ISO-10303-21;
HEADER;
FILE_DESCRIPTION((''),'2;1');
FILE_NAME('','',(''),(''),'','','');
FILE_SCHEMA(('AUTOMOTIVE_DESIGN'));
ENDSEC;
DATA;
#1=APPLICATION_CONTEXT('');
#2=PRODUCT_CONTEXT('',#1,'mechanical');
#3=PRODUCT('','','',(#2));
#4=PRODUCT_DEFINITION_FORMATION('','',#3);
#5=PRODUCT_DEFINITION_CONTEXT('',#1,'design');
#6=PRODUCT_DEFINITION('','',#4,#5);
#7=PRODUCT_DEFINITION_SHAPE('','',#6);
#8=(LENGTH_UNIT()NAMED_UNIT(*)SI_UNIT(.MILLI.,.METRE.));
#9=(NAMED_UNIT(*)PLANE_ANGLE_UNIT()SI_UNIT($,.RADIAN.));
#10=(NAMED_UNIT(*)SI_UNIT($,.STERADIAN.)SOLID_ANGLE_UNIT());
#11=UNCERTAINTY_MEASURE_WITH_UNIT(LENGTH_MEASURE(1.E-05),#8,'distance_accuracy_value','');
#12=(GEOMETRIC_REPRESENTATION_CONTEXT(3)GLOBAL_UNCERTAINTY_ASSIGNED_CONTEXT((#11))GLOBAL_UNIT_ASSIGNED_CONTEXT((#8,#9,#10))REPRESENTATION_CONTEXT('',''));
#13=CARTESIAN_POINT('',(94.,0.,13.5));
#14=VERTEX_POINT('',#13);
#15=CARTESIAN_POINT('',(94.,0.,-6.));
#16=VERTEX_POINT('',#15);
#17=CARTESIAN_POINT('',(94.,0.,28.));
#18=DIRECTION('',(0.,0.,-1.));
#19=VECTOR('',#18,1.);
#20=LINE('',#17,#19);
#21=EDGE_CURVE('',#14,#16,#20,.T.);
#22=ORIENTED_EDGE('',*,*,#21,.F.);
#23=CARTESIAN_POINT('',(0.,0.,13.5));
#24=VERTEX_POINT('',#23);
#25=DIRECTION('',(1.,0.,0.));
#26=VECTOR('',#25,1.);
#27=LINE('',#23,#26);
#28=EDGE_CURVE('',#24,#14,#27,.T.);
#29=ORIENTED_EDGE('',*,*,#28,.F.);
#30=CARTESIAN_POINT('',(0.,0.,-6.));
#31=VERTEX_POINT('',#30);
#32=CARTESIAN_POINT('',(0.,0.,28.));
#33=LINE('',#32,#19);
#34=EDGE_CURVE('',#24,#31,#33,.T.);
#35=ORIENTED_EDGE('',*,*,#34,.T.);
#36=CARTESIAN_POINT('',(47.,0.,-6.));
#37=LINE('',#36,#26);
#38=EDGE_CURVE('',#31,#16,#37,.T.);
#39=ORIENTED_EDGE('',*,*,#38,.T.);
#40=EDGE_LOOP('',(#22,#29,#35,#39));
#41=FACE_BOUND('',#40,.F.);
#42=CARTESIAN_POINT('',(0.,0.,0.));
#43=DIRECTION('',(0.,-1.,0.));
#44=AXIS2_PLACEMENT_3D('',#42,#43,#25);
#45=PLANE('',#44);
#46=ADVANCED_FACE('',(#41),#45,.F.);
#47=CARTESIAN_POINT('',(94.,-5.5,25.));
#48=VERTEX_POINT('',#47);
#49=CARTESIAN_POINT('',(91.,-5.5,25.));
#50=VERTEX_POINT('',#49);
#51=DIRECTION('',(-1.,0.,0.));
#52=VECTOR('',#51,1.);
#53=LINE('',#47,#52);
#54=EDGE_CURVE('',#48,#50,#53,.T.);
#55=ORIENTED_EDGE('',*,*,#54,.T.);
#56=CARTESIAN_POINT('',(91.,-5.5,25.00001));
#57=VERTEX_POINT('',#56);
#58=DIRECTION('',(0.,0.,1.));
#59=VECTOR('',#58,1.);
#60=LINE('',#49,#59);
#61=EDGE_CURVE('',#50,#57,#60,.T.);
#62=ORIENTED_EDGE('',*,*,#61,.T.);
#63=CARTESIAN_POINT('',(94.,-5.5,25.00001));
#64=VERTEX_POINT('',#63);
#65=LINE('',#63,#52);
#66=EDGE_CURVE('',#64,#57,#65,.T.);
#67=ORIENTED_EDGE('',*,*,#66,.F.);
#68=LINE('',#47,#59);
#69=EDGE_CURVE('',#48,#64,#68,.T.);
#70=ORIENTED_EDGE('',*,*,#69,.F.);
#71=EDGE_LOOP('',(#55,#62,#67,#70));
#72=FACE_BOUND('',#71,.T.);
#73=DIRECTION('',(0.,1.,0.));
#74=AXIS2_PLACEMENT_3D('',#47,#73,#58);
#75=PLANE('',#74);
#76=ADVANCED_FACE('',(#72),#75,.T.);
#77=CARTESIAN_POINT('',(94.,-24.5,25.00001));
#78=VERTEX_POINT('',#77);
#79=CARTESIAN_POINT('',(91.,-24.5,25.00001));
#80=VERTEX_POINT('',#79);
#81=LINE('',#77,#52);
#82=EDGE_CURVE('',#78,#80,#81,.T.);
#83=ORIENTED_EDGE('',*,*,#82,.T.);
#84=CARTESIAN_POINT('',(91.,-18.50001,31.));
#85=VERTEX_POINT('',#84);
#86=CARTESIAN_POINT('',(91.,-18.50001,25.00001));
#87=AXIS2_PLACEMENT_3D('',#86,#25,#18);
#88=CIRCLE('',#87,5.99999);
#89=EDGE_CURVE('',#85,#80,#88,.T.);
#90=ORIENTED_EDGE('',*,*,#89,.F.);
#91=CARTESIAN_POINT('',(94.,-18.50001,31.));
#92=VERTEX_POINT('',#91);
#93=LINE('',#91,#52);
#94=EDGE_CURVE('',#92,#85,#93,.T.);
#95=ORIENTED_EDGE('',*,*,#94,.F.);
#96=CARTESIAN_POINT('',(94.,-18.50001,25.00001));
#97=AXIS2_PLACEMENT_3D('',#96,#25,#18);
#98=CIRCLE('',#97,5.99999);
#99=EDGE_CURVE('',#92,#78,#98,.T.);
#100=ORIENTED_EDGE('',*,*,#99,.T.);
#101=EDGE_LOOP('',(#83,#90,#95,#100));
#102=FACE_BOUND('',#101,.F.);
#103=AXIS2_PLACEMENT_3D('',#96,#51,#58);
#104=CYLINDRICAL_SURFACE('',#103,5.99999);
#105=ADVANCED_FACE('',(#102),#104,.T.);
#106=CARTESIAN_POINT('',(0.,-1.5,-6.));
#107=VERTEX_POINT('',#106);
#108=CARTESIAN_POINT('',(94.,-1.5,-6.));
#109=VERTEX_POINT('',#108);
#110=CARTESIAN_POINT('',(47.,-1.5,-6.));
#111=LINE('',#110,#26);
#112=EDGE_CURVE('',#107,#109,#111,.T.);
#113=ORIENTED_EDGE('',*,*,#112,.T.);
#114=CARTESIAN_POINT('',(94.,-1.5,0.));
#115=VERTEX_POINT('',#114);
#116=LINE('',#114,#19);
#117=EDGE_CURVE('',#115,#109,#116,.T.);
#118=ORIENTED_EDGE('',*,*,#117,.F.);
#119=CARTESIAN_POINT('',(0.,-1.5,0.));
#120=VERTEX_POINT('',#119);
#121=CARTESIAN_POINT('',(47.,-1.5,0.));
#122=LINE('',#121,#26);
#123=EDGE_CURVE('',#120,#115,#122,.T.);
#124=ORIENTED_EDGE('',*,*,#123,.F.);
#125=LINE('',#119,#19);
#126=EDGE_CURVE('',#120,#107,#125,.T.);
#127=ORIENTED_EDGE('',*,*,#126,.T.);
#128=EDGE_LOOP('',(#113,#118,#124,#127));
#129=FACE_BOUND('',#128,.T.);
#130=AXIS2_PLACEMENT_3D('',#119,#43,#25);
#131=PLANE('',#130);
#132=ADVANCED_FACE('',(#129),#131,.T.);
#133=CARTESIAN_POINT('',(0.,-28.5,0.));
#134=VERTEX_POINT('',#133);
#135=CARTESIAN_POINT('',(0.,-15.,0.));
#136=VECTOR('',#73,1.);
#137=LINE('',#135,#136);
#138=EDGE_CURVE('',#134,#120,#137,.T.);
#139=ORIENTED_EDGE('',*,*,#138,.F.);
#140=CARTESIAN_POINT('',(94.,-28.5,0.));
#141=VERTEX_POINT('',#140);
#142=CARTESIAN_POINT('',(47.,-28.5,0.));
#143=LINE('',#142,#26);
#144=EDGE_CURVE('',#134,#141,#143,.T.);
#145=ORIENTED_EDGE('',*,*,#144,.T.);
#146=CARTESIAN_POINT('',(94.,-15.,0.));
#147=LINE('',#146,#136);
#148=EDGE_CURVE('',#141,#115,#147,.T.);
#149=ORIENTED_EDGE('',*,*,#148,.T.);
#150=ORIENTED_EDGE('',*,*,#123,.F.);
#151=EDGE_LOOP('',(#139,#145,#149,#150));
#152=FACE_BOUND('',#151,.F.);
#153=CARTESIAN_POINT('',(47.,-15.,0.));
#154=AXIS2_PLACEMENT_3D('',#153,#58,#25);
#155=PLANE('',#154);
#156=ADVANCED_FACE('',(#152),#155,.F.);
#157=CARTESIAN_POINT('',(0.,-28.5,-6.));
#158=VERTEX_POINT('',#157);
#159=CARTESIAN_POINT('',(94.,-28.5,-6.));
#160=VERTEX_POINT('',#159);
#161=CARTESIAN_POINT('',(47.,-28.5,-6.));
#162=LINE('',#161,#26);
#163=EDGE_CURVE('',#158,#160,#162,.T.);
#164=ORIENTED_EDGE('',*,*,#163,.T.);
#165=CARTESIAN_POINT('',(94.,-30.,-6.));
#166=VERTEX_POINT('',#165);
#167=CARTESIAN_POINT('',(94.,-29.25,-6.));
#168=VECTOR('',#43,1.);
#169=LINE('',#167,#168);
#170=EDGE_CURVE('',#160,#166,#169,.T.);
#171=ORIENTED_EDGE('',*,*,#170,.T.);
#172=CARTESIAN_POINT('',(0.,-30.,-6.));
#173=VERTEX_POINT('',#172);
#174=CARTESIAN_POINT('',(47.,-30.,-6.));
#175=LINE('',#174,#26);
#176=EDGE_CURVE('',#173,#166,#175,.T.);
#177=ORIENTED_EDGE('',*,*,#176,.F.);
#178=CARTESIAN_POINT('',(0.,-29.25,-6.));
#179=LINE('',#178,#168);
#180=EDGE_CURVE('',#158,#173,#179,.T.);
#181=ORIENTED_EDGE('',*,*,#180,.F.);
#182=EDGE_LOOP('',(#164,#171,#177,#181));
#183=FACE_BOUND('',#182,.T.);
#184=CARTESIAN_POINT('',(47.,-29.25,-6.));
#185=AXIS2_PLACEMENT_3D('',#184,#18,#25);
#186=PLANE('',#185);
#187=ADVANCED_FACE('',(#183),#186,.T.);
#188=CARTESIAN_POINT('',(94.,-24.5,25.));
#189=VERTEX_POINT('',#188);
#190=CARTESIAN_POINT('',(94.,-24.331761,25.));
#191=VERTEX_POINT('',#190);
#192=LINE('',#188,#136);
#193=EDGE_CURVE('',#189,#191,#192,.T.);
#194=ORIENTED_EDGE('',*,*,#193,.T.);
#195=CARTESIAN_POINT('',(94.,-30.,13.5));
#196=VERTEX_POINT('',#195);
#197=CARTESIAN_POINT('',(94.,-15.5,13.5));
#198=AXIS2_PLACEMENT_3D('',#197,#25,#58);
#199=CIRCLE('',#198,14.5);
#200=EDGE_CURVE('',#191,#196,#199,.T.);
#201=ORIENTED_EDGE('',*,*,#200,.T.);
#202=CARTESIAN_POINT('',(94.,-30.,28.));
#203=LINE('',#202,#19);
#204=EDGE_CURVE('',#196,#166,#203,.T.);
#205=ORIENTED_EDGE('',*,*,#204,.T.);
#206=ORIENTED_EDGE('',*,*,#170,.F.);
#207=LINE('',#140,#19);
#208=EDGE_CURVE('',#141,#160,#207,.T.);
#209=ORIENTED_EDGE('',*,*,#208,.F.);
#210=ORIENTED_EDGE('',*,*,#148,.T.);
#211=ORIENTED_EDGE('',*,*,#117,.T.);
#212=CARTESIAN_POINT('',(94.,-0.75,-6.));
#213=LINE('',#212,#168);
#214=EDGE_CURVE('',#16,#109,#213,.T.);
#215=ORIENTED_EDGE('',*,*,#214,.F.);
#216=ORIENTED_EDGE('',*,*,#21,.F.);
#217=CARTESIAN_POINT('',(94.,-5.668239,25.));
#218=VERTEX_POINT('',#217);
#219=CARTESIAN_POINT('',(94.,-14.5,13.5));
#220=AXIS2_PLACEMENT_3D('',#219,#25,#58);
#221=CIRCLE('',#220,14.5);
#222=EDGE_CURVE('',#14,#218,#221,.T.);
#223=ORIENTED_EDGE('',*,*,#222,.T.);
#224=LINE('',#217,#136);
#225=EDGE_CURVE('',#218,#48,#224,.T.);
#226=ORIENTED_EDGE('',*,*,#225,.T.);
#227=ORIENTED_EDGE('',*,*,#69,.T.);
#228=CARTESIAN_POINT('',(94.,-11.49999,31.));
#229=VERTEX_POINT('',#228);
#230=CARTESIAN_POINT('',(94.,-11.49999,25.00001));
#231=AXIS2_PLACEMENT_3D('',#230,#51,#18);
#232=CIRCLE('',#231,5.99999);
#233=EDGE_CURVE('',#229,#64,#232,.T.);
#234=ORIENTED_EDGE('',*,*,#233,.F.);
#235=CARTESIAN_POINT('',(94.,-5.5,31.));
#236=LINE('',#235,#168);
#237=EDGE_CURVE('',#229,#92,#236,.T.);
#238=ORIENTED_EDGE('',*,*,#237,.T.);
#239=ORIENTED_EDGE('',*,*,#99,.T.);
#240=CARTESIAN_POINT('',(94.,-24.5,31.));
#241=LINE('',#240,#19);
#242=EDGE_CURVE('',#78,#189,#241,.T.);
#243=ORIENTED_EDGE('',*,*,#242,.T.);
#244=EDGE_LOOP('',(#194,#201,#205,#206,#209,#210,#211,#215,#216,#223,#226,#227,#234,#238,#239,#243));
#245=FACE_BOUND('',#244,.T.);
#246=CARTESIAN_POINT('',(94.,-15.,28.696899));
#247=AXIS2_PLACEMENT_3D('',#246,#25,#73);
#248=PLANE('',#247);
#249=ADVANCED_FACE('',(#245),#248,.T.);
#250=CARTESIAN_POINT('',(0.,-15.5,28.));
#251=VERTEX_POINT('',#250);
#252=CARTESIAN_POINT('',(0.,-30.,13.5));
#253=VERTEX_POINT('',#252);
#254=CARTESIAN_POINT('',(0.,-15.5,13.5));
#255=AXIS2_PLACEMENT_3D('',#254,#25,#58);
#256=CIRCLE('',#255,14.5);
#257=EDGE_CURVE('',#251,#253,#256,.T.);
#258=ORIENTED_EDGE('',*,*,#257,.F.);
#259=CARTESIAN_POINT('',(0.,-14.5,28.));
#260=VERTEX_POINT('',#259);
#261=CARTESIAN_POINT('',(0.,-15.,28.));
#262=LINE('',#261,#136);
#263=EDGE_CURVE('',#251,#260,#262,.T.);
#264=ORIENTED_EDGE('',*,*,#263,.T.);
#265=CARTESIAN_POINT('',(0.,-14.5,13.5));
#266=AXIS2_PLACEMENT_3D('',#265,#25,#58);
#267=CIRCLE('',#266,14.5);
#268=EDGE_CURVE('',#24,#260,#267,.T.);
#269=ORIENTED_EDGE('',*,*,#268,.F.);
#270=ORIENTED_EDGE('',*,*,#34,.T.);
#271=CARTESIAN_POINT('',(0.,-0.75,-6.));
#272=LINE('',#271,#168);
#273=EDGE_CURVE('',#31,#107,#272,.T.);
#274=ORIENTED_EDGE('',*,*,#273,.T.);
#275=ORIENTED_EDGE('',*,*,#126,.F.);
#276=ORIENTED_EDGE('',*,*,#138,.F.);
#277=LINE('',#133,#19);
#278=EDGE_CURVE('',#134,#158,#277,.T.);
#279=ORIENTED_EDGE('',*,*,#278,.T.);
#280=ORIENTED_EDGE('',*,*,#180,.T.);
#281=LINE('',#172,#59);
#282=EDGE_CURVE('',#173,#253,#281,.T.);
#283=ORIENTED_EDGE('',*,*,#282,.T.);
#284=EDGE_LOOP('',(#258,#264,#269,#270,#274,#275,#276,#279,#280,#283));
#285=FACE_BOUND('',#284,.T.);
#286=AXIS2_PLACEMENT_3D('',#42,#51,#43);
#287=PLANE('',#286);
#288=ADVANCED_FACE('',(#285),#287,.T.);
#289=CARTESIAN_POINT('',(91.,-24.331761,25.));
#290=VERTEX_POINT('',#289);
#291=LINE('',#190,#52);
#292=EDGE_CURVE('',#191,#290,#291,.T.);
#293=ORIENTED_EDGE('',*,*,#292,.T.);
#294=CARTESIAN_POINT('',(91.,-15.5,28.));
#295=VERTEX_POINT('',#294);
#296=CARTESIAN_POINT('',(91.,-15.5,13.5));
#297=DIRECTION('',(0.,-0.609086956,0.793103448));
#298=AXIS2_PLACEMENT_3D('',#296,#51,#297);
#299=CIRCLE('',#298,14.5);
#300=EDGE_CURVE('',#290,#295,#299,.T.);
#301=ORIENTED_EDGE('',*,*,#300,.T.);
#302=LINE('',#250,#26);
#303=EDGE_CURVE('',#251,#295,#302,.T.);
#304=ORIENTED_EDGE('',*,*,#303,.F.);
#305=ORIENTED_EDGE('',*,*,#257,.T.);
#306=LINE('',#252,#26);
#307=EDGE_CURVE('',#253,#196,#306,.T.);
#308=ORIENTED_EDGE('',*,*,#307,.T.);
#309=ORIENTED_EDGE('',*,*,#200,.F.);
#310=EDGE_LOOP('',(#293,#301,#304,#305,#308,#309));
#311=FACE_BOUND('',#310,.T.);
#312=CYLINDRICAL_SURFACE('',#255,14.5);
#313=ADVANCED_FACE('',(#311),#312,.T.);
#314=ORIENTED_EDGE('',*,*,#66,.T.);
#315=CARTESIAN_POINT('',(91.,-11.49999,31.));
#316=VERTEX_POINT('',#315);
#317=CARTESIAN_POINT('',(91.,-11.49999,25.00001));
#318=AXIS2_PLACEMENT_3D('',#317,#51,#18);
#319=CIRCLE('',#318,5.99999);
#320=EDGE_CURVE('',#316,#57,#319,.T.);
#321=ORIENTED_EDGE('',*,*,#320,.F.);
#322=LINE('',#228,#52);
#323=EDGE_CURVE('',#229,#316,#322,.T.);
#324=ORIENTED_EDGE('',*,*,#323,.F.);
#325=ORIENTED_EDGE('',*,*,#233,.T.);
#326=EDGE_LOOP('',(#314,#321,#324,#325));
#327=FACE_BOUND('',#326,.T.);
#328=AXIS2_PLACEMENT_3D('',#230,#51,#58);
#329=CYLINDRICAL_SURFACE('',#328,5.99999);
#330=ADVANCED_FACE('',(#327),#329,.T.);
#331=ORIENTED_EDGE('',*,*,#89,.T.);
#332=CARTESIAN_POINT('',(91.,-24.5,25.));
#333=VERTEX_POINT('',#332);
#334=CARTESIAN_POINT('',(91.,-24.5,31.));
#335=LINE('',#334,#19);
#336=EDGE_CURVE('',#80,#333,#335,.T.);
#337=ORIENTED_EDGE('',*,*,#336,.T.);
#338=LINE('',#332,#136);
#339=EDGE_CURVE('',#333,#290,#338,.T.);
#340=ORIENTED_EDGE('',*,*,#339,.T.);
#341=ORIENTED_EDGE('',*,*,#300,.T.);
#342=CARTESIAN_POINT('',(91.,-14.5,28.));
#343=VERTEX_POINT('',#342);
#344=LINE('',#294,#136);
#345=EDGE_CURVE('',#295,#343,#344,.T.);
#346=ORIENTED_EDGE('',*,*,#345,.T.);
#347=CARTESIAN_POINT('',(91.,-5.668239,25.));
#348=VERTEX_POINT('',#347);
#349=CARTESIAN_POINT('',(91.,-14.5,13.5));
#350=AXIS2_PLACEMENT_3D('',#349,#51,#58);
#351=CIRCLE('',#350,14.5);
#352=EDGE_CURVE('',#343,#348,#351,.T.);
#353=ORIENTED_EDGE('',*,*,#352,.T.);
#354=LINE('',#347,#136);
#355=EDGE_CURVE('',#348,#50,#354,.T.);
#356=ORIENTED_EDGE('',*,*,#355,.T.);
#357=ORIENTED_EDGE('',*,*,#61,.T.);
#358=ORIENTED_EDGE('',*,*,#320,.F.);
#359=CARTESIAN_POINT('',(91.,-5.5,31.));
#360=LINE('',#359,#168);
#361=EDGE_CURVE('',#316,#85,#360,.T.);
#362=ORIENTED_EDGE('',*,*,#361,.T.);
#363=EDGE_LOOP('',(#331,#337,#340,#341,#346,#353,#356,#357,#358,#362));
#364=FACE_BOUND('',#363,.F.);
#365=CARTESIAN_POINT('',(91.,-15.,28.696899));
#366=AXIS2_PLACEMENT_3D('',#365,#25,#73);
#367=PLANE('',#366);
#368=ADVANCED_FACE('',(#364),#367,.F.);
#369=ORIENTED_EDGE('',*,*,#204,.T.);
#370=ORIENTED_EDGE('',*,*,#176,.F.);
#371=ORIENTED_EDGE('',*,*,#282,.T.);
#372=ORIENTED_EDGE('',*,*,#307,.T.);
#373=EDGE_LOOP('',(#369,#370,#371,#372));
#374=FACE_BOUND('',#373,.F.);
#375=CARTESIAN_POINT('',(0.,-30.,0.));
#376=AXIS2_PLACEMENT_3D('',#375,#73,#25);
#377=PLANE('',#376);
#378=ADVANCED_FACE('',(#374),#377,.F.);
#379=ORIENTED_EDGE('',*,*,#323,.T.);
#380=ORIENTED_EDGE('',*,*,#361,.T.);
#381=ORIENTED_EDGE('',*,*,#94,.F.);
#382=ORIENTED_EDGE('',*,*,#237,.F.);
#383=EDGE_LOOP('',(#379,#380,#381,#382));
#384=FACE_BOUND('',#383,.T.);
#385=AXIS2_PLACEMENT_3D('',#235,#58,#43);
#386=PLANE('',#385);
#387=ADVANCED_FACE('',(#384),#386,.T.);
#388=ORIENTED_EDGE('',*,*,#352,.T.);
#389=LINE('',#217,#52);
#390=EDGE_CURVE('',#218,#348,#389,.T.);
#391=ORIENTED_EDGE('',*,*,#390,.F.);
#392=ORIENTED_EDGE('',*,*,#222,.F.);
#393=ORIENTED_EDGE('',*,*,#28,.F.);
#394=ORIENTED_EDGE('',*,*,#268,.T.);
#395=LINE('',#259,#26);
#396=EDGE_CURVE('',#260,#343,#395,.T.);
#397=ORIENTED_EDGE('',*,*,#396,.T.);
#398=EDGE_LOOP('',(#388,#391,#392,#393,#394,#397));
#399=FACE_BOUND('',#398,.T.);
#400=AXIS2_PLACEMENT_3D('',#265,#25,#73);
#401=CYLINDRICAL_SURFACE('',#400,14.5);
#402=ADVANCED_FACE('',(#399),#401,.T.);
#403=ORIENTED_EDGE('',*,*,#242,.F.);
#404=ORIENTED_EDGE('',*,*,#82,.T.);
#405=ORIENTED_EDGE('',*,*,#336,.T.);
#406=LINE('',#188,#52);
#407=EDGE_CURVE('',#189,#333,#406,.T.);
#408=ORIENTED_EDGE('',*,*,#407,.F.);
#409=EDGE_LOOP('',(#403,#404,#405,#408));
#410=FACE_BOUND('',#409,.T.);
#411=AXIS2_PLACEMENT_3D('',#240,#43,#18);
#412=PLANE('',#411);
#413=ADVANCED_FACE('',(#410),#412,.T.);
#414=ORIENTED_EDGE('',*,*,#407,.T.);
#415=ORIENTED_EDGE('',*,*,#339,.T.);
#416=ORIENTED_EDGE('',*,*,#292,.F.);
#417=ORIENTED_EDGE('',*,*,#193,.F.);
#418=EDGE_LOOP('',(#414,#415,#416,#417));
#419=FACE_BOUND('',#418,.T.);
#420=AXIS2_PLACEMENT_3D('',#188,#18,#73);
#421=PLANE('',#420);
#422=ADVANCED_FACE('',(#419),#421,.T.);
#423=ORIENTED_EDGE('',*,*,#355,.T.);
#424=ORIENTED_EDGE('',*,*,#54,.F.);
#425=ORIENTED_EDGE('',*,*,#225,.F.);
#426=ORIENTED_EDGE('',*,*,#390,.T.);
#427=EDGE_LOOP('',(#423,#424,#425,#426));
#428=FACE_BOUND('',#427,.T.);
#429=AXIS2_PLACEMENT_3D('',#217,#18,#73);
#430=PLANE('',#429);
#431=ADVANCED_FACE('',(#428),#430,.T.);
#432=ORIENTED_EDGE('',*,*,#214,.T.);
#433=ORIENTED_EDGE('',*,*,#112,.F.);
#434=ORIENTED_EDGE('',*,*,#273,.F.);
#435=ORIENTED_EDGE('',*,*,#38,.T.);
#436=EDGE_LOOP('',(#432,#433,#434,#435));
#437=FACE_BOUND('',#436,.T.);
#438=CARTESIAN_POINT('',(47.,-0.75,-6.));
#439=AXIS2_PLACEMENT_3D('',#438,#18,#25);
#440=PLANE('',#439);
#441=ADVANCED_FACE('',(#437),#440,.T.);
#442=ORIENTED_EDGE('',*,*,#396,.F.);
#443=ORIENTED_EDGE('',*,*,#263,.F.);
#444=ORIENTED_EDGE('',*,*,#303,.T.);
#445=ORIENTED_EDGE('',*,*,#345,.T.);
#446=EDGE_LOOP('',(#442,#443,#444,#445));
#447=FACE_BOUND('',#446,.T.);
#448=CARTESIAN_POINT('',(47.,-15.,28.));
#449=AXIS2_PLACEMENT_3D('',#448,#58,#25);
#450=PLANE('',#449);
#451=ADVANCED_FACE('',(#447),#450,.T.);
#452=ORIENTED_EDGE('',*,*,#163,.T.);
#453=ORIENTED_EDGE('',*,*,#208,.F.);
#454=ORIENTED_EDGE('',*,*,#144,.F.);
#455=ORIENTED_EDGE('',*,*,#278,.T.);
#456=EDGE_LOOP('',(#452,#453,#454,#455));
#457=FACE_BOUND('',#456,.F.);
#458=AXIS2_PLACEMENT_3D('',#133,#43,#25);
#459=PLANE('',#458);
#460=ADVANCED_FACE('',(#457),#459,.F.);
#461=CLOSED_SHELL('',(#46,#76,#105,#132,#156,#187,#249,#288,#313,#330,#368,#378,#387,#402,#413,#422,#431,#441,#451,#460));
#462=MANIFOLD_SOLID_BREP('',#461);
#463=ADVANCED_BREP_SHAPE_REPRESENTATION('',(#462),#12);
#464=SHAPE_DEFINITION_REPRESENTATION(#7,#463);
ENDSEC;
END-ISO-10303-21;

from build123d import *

# Parameters (mm, degrees)
F0_W     = 94
F0_H     = 30
F1_DEPTH = 28
F2_W     = 94
F2_H     = 1.5
F3_DEPTH = 6
F4_R     = 14.5
F6_DEPTH = 3
F7_R     = 5.99999


# Not quite as in the source:
# - a fillet or chamfer is up to 0.001 mm smaller than in the source, because OpenCascade refuses the exact size


with BuildPart() as f1:
    # F0 (on Top) → F1 (new body)
    with BuildSketch(Plane.XY):
        with Locations((47, -15)):
            Rectangle(F0_W, F0_H)
    extrude(amount=F1_DEPTH)

    # F2 (on face) → F3 (join)
    with BuildSketch(Plane(origin=(0, 0, 0), x_dir=(1, 0, 0), z_dir=(0, 0, -1))):
        with Locations((47, 0.75)):
            Rectangle(F2_W, F2_H)
        with Locations((47, 29.25)):
            Rectangle(F2_W, F2_H)
    extrude(amount=F3_DEPTH)

    # F4
    f4_edges = [f1.edges().sort_by_distance(p)[0] for p in [
        (47, 0, 28),
        (47, -30, 28),
    ]]
    fillet(f4_edges, radius=F4_R)

    # F5 (on face) → F6 (join)
    with BuildSketch(Plane.YZ.offset(94)):
        with BuildLine():
            Line((-5.5, 31), (-24.5, 31))
            Line((-24.5, 31), (-24.5, 25))
            Line((-24.5, 25), (-24.3317608663, 25))
            ThreePointArc((-24.3317608663, 25), (-20.1636895265, 27.2295302177), (-15.5, 28))
            Line((-15.5, 28), (-14.5, 28))
            ThreePointArc((-14.5, 28), (-9.8363104735, 27.2295302177), (-5.6682391337, 25))
            Line((-5.6682391337, 25), (-5.5, 25))
            Line((-5.5, 25), (-5.5, 31))
        make_face()
    extrude(amount=-F6_DEPTH)

    # F7 (radius 6 in the source; OpenCascade refuses exactly that, so slightly less here)
    f7_edges = [f1.edges().sort_by_distance(p)[0] for p in [
        (92.5, -24.5, 31),
        (92.5, -5.5, 31),
    ]]
    fillet(f7_edges, radius=F7_R)


solid = f1.part
